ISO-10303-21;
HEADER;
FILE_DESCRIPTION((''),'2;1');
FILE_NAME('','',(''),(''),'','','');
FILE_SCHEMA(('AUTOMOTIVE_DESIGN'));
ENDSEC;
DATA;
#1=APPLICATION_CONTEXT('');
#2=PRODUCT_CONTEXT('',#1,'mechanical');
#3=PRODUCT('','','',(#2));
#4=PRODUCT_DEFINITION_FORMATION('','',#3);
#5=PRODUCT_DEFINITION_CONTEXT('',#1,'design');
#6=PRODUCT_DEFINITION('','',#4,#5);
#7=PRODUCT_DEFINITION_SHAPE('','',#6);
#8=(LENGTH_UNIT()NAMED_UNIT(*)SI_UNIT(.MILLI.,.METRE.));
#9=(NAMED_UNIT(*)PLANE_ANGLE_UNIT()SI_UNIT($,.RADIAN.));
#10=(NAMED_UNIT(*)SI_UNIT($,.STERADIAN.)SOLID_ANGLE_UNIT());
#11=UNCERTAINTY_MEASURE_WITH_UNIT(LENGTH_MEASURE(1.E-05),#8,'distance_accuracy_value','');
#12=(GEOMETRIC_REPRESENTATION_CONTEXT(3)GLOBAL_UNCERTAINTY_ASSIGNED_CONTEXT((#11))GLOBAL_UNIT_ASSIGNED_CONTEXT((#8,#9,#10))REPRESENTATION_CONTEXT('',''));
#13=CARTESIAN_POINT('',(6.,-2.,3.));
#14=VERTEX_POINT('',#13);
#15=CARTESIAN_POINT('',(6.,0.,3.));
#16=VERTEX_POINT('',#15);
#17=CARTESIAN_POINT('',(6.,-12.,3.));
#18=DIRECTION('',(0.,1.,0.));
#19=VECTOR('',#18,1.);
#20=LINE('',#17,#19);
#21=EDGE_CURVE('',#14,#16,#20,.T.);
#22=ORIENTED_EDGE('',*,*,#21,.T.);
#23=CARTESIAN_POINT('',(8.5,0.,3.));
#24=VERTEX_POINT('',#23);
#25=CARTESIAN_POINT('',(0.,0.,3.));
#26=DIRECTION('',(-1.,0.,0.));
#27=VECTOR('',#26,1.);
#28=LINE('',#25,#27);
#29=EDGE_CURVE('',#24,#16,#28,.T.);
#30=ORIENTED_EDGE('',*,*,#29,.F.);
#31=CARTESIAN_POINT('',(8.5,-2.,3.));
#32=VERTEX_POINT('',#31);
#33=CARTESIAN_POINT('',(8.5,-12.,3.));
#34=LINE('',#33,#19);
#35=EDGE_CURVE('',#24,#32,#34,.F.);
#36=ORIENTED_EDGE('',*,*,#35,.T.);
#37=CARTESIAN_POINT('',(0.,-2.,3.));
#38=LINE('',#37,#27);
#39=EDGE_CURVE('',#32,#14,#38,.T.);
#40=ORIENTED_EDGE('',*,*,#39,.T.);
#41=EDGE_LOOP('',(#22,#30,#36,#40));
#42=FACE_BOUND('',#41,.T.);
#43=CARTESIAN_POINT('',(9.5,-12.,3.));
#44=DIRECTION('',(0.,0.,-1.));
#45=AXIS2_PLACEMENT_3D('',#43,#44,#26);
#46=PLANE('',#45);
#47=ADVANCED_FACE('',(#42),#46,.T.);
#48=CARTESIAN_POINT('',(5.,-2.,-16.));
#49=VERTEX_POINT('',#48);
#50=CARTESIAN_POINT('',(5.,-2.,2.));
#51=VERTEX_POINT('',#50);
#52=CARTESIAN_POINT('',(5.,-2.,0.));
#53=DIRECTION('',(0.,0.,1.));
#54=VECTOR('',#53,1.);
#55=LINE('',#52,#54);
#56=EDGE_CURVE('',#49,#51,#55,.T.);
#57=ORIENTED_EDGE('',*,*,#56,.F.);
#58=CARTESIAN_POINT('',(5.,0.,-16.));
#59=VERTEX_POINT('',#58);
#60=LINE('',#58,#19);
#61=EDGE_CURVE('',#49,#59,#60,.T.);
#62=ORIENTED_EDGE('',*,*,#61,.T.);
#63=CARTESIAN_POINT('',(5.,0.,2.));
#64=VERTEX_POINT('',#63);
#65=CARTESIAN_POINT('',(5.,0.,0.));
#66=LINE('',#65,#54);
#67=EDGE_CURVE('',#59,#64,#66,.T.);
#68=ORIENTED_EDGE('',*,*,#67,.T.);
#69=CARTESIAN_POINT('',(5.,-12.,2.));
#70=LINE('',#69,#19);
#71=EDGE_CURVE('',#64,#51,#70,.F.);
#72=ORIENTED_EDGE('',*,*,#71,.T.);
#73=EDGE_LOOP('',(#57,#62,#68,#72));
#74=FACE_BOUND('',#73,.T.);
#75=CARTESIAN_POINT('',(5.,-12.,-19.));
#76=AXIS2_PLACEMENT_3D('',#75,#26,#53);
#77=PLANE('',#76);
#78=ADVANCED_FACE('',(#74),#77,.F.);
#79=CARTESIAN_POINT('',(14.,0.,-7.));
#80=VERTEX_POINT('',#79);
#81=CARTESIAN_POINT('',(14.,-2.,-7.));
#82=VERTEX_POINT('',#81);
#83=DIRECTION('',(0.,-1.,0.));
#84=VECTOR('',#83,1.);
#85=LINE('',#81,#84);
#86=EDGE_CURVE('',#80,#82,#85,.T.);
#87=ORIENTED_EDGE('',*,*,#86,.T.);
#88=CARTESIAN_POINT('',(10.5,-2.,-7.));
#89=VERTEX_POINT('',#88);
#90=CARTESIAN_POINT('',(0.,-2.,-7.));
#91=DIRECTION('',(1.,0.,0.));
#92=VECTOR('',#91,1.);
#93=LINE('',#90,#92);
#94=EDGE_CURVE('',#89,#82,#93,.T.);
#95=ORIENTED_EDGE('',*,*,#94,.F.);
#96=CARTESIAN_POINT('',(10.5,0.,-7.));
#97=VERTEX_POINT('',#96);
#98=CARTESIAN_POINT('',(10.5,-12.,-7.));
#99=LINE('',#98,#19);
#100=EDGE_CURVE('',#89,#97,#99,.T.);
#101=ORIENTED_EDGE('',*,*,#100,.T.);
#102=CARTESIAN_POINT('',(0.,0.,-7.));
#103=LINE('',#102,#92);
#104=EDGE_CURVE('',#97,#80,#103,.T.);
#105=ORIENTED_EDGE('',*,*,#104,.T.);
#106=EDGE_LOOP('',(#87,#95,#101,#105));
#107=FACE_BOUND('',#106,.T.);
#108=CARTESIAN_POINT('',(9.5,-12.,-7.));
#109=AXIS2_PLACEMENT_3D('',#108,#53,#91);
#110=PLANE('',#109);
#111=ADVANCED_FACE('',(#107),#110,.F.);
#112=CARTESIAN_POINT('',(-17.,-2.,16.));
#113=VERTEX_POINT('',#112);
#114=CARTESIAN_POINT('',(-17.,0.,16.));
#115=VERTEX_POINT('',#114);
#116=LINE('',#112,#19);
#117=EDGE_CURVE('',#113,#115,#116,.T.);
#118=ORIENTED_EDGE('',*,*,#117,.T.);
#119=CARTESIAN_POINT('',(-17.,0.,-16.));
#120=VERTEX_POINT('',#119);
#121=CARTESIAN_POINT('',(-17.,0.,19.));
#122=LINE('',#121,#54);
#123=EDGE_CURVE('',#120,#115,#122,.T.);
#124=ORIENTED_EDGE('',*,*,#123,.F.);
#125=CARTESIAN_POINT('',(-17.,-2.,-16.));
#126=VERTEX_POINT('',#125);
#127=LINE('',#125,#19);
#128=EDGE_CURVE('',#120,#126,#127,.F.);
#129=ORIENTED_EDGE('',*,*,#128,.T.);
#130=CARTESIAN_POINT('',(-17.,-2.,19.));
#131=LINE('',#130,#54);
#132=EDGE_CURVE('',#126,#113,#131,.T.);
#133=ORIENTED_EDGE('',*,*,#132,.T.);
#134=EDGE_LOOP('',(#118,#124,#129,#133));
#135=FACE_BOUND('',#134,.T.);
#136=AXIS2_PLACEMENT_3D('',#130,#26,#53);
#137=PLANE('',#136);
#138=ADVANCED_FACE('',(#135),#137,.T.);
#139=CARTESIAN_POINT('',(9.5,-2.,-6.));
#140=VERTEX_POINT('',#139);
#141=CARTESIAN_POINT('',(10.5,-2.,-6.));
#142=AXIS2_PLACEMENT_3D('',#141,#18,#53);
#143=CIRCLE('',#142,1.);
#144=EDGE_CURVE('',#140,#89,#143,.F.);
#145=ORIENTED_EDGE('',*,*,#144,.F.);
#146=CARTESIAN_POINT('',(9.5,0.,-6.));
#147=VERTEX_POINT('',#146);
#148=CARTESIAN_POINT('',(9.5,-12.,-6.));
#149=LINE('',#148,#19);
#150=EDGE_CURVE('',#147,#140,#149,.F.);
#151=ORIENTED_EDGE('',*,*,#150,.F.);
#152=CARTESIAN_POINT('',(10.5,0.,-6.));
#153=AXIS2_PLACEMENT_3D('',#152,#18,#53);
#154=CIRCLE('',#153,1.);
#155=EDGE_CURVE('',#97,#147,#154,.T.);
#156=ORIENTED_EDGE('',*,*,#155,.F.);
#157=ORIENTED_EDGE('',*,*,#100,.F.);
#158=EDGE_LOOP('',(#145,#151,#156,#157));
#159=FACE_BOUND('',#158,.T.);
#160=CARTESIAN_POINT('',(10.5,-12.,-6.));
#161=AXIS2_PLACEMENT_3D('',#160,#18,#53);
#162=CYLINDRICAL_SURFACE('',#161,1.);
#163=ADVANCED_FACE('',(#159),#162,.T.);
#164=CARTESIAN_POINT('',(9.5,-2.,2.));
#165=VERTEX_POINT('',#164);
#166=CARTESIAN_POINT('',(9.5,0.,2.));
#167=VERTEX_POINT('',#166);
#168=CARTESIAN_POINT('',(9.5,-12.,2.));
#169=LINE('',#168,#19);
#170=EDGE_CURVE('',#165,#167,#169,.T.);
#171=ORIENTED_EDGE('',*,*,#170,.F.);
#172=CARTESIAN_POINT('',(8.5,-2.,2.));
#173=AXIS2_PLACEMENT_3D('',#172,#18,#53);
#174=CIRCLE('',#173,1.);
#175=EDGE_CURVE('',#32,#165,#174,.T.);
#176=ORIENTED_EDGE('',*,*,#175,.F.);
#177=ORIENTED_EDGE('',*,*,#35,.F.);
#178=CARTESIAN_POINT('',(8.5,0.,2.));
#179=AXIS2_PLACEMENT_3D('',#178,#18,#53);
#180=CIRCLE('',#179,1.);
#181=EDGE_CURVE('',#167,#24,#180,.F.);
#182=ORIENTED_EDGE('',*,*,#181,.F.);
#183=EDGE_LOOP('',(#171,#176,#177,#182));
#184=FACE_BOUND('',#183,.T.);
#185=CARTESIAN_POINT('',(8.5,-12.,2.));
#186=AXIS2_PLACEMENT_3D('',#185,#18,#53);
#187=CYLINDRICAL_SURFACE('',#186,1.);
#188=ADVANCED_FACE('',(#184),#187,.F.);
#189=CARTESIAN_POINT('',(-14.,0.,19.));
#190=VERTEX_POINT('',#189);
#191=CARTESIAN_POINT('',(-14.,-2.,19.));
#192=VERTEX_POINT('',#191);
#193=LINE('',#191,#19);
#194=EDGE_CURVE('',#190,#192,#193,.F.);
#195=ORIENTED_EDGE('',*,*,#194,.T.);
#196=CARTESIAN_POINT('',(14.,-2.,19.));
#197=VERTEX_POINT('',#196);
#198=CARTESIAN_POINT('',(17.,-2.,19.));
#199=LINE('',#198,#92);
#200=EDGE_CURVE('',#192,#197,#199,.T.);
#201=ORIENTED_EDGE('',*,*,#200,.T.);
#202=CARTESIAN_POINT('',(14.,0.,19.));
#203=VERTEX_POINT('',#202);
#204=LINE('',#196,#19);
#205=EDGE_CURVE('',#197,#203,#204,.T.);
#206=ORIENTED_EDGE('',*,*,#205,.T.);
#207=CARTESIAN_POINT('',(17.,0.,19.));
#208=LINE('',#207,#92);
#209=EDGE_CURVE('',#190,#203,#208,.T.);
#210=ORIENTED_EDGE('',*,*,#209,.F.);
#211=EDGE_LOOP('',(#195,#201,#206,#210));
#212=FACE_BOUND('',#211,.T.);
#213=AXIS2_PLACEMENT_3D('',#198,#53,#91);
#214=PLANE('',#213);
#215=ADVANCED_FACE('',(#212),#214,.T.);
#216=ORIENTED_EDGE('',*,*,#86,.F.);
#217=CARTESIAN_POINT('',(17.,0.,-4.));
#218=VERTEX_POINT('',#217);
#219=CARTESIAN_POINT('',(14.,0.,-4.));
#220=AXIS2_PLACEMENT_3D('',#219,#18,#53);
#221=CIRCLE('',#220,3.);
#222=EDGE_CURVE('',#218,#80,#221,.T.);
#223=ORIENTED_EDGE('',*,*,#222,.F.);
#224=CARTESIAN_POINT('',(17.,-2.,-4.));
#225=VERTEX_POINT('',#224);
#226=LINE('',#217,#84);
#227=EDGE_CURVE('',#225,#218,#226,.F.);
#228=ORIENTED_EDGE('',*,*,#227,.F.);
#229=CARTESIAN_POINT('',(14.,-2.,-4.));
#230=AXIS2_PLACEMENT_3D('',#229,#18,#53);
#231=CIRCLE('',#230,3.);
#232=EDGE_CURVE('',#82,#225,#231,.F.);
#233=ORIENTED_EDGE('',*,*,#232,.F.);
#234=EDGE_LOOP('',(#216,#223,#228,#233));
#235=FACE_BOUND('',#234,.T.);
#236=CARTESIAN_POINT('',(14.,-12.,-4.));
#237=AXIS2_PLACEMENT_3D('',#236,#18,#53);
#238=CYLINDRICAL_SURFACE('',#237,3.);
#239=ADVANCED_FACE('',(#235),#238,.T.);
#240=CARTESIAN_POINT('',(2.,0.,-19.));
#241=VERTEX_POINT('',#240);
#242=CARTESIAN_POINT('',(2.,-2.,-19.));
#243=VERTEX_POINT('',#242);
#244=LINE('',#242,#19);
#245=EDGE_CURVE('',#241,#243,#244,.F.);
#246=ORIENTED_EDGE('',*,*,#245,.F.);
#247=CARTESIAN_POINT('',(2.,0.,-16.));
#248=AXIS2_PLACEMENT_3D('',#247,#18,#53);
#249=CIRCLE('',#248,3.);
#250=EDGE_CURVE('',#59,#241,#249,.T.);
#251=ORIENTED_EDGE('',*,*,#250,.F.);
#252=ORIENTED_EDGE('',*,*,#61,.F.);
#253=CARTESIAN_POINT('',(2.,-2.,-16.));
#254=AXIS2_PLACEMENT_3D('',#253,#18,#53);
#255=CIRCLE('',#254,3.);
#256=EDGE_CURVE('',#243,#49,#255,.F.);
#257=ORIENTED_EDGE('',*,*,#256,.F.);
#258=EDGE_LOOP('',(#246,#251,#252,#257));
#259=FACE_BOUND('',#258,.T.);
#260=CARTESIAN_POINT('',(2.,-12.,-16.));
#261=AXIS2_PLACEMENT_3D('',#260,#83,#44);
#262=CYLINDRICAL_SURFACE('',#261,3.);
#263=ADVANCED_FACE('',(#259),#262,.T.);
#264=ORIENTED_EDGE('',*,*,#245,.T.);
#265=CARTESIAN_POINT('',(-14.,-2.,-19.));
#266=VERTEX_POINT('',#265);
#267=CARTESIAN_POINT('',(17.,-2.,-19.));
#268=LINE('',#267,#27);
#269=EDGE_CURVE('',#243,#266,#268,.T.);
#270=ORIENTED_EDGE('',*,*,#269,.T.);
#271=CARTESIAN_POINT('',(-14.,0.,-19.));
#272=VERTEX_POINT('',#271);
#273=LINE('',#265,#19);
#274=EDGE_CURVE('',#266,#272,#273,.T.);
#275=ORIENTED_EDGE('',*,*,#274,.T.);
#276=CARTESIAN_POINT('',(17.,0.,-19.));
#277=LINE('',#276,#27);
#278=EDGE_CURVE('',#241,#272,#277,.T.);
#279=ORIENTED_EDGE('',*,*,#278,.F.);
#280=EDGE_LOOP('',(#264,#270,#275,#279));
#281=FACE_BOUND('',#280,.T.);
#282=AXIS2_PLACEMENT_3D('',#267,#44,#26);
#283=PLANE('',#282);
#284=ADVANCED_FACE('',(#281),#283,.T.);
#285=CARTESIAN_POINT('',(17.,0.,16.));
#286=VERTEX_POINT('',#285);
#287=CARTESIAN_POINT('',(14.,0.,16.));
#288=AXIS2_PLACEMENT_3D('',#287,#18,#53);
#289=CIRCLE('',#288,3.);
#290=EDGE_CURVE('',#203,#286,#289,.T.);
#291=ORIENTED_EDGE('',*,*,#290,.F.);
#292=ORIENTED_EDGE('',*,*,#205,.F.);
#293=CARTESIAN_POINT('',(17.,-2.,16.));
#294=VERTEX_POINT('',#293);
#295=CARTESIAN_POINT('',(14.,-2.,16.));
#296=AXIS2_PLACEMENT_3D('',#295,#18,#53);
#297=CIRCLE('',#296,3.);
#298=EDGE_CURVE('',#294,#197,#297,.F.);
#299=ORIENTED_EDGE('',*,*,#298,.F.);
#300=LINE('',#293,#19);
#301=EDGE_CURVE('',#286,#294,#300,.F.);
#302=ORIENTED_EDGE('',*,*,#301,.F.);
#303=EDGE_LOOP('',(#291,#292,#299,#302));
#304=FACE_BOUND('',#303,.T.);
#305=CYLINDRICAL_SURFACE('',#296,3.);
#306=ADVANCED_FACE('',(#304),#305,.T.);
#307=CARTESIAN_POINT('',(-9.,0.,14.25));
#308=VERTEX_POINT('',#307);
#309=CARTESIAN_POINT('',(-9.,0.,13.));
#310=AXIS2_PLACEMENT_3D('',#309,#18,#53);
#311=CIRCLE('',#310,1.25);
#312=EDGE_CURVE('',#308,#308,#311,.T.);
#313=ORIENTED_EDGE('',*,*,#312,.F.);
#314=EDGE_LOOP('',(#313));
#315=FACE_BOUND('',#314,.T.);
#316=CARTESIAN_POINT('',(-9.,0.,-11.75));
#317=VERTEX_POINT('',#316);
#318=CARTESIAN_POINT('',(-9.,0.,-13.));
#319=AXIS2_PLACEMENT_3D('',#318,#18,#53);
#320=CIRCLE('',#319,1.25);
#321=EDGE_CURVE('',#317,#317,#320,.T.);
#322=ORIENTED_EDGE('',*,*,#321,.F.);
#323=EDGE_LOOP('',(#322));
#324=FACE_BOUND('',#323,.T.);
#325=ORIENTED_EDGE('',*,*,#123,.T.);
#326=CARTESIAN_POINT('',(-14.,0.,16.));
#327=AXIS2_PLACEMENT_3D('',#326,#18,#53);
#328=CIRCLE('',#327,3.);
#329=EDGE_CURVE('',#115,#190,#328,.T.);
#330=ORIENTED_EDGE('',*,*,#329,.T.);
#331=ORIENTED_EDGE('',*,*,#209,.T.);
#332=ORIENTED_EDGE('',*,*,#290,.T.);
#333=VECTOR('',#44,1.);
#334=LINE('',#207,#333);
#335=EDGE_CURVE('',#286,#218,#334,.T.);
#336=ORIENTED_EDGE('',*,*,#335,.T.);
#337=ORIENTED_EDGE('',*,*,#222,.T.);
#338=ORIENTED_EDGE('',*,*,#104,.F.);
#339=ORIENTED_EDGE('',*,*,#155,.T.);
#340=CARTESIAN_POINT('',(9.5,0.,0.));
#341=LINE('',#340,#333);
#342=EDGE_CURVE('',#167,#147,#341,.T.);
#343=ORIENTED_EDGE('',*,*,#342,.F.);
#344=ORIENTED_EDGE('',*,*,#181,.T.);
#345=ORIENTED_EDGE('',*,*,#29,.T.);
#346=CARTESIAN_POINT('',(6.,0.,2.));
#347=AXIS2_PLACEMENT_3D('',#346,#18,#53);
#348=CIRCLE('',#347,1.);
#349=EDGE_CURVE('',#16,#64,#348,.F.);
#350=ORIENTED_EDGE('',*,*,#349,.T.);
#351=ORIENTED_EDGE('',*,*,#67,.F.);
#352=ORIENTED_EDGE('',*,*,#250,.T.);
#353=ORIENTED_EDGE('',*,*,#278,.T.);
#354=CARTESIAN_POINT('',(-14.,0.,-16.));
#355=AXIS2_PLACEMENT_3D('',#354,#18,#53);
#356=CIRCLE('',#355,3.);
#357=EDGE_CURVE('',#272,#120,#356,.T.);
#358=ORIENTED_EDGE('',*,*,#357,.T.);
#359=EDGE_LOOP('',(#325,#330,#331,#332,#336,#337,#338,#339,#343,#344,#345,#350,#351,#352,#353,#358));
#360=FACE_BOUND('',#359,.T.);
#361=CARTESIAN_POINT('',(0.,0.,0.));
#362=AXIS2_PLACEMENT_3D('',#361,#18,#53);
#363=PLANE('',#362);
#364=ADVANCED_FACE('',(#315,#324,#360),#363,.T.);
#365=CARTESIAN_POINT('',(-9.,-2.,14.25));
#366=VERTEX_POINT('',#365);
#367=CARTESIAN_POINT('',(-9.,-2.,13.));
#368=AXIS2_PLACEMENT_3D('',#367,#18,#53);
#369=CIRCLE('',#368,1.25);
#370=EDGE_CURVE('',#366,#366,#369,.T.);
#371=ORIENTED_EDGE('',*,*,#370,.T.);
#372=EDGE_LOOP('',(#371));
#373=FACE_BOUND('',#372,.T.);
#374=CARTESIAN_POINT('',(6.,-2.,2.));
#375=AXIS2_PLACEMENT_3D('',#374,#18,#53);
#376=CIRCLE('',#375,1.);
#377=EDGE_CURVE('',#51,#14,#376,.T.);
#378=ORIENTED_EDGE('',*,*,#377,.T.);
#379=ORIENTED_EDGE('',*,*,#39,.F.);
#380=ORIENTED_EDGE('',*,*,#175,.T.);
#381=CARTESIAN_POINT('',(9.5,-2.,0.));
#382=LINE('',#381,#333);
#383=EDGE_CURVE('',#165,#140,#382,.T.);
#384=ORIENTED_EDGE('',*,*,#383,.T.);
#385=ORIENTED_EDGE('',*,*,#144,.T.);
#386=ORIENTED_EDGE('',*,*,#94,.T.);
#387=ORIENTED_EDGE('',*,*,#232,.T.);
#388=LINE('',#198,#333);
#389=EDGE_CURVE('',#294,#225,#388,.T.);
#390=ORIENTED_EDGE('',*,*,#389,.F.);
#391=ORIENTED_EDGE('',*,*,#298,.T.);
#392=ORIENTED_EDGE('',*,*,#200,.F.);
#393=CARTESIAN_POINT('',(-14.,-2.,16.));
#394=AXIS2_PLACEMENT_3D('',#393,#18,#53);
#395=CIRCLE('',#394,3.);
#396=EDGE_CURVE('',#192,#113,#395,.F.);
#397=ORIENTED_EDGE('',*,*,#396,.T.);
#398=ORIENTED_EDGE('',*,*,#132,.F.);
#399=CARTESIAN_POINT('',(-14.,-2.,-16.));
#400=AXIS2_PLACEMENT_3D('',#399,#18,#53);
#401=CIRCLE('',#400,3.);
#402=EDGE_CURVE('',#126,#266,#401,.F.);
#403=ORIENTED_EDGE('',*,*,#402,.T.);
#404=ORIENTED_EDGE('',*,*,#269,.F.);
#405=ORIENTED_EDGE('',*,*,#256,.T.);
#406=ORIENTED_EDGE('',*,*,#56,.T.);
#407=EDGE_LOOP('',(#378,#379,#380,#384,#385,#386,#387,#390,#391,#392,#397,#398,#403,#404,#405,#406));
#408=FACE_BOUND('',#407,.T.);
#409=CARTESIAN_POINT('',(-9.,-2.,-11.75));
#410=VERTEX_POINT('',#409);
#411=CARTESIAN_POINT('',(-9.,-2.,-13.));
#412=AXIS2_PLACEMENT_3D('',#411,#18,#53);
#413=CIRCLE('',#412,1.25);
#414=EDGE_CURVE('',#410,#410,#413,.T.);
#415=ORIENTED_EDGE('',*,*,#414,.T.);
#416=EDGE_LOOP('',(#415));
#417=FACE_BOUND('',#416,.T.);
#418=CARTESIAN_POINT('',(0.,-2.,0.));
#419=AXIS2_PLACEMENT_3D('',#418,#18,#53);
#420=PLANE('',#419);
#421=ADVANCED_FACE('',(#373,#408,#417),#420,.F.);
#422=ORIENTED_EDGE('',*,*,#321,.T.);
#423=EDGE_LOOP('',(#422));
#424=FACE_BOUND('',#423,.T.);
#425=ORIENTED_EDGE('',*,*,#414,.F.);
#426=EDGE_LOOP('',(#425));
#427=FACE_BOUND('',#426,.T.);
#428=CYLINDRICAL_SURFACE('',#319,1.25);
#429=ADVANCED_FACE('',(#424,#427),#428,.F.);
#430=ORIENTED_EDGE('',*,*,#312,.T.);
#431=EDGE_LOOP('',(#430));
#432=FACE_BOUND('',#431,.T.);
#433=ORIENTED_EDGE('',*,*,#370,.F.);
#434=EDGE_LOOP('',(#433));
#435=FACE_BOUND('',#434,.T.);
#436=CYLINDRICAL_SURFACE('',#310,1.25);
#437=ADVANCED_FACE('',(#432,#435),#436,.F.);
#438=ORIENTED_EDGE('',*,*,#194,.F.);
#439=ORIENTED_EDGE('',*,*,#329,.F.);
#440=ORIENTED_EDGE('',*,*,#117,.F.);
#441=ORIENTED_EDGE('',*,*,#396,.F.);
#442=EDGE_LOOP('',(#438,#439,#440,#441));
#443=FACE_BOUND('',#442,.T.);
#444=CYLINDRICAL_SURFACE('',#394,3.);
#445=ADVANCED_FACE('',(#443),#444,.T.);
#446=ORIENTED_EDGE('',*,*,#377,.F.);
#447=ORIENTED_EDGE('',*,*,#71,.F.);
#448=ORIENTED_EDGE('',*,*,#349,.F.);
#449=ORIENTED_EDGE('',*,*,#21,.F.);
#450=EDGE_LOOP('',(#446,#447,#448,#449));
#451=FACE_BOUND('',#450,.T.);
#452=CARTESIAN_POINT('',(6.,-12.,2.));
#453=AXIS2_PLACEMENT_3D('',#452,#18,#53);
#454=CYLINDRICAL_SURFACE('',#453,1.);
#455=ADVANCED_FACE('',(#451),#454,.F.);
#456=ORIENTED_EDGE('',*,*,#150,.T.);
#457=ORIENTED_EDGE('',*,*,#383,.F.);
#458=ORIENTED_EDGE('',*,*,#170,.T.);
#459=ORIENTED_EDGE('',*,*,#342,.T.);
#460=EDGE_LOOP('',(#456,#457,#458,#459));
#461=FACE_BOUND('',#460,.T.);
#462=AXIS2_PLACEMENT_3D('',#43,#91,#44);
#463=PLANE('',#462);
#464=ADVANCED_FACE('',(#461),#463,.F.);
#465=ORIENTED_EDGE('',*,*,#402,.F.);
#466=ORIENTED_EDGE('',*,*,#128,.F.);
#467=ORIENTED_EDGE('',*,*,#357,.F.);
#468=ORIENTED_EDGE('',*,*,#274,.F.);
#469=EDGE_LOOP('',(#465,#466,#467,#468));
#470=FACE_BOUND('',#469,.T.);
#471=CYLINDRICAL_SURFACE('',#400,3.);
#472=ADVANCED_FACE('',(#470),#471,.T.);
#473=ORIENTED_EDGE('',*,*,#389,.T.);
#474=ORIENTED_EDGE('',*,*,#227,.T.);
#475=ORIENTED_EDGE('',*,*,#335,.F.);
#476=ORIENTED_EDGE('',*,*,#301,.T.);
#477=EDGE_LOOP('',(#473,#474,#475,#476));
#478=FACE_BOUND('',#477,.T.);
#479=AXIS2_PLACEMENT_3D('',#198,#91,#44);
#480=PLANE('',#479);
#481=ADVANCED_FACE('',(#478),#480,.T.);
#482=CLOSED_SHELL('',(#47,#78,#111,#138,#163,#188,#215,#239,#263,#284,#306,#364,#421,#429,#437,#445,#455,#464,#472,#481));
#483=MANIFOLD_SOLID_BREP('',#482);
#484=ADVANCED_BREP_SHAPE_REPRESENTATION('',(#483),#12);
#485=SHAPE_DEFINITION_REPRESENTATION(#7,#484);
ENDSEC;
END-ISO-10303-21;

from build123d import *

# Parameters (mm, degrees)
SKETCH1_W                   = 34
SKETCH1_H                   = 38
BASE_FLANGE1_DEPTH          = 2
TAP_DRILL_FOR_M3X0_5_TAP1_D = 2.5
CUT_EXTRUDE1_DEPTH          = 10
CUT_EXTRUDE1_DEPTH_BACK     = 10
FILLET2_R                   = 1
FILLET1_R                   = 3


# Sheet-metal steps are written as plain solids
with BuildPart() as part:
    # Sketch1 → Base-Flange1 (new body)
    with BuildSketch(Plane(origin=(0, 0, 0), x_dir=(1, 0, 0), z_dir=(0, 1, 0))):
        Rectangle(SKETCH1_W, SKETCH1_H)
    extrude(amount=-BASE_FLANGE1_DEPTH)

    # Tap Drill for M3x0.5 Tap1 (through all)
    with Locations(Plane(origin=(0, 0, 0), x_dir=(1, 0, 0), z_dir=(0, 1, 0))):
        with Locations((-9, -13), (-9, 13)):
            Hole(TAP_DRILL_FOR_M3X0_5_TAP1_D / 2)

    # Sketch14 → Cut-Extrude1 (cut, two sides: drawn at the far end of the back side and taken through both)
    with BuildSketch(Plane(origin=(0, -2, 0), x_dir=(-1, 0, 0), z_dir=(0, -1, 0)).offset(-CUT_EXTRUDE1_DEPTH_BACK)):
        Polygon((-9.5, 19), (-5, 19), (-5, -3), (-9.5, -3), (-9.5, 7), (-26.223726354, 7), (-26.223726354, 19), align=None)
    extrude(amount=CUT_EXTRUDE1_DEPTH + CUT_EXTRUDE1_DEPTH_BACK, mode=Mode.SUBTRACT)

    # Fillet2
    fillet2_edges = [part.edges().sort_by_distance(p)[0] for p in [
        (9.5, -1, -7),
        (9.5, -1, 3),
        (5, -1, 3),
    ]]
    fillet(fillet2_edges, radius=FILLET2_R)

    # Fillet1
    fillet1_edges = [part.edges().sort_by_distance(p)[0] for p in [
        (5, -1, -19),
        (17, -1, -7),
        (-17, -1, -19),
        (17, -1, 19),
        (-17, -1, 19),
    ]]
    fillet(fillet1_edges, radius=FILLET1_R)


solid = part.part
